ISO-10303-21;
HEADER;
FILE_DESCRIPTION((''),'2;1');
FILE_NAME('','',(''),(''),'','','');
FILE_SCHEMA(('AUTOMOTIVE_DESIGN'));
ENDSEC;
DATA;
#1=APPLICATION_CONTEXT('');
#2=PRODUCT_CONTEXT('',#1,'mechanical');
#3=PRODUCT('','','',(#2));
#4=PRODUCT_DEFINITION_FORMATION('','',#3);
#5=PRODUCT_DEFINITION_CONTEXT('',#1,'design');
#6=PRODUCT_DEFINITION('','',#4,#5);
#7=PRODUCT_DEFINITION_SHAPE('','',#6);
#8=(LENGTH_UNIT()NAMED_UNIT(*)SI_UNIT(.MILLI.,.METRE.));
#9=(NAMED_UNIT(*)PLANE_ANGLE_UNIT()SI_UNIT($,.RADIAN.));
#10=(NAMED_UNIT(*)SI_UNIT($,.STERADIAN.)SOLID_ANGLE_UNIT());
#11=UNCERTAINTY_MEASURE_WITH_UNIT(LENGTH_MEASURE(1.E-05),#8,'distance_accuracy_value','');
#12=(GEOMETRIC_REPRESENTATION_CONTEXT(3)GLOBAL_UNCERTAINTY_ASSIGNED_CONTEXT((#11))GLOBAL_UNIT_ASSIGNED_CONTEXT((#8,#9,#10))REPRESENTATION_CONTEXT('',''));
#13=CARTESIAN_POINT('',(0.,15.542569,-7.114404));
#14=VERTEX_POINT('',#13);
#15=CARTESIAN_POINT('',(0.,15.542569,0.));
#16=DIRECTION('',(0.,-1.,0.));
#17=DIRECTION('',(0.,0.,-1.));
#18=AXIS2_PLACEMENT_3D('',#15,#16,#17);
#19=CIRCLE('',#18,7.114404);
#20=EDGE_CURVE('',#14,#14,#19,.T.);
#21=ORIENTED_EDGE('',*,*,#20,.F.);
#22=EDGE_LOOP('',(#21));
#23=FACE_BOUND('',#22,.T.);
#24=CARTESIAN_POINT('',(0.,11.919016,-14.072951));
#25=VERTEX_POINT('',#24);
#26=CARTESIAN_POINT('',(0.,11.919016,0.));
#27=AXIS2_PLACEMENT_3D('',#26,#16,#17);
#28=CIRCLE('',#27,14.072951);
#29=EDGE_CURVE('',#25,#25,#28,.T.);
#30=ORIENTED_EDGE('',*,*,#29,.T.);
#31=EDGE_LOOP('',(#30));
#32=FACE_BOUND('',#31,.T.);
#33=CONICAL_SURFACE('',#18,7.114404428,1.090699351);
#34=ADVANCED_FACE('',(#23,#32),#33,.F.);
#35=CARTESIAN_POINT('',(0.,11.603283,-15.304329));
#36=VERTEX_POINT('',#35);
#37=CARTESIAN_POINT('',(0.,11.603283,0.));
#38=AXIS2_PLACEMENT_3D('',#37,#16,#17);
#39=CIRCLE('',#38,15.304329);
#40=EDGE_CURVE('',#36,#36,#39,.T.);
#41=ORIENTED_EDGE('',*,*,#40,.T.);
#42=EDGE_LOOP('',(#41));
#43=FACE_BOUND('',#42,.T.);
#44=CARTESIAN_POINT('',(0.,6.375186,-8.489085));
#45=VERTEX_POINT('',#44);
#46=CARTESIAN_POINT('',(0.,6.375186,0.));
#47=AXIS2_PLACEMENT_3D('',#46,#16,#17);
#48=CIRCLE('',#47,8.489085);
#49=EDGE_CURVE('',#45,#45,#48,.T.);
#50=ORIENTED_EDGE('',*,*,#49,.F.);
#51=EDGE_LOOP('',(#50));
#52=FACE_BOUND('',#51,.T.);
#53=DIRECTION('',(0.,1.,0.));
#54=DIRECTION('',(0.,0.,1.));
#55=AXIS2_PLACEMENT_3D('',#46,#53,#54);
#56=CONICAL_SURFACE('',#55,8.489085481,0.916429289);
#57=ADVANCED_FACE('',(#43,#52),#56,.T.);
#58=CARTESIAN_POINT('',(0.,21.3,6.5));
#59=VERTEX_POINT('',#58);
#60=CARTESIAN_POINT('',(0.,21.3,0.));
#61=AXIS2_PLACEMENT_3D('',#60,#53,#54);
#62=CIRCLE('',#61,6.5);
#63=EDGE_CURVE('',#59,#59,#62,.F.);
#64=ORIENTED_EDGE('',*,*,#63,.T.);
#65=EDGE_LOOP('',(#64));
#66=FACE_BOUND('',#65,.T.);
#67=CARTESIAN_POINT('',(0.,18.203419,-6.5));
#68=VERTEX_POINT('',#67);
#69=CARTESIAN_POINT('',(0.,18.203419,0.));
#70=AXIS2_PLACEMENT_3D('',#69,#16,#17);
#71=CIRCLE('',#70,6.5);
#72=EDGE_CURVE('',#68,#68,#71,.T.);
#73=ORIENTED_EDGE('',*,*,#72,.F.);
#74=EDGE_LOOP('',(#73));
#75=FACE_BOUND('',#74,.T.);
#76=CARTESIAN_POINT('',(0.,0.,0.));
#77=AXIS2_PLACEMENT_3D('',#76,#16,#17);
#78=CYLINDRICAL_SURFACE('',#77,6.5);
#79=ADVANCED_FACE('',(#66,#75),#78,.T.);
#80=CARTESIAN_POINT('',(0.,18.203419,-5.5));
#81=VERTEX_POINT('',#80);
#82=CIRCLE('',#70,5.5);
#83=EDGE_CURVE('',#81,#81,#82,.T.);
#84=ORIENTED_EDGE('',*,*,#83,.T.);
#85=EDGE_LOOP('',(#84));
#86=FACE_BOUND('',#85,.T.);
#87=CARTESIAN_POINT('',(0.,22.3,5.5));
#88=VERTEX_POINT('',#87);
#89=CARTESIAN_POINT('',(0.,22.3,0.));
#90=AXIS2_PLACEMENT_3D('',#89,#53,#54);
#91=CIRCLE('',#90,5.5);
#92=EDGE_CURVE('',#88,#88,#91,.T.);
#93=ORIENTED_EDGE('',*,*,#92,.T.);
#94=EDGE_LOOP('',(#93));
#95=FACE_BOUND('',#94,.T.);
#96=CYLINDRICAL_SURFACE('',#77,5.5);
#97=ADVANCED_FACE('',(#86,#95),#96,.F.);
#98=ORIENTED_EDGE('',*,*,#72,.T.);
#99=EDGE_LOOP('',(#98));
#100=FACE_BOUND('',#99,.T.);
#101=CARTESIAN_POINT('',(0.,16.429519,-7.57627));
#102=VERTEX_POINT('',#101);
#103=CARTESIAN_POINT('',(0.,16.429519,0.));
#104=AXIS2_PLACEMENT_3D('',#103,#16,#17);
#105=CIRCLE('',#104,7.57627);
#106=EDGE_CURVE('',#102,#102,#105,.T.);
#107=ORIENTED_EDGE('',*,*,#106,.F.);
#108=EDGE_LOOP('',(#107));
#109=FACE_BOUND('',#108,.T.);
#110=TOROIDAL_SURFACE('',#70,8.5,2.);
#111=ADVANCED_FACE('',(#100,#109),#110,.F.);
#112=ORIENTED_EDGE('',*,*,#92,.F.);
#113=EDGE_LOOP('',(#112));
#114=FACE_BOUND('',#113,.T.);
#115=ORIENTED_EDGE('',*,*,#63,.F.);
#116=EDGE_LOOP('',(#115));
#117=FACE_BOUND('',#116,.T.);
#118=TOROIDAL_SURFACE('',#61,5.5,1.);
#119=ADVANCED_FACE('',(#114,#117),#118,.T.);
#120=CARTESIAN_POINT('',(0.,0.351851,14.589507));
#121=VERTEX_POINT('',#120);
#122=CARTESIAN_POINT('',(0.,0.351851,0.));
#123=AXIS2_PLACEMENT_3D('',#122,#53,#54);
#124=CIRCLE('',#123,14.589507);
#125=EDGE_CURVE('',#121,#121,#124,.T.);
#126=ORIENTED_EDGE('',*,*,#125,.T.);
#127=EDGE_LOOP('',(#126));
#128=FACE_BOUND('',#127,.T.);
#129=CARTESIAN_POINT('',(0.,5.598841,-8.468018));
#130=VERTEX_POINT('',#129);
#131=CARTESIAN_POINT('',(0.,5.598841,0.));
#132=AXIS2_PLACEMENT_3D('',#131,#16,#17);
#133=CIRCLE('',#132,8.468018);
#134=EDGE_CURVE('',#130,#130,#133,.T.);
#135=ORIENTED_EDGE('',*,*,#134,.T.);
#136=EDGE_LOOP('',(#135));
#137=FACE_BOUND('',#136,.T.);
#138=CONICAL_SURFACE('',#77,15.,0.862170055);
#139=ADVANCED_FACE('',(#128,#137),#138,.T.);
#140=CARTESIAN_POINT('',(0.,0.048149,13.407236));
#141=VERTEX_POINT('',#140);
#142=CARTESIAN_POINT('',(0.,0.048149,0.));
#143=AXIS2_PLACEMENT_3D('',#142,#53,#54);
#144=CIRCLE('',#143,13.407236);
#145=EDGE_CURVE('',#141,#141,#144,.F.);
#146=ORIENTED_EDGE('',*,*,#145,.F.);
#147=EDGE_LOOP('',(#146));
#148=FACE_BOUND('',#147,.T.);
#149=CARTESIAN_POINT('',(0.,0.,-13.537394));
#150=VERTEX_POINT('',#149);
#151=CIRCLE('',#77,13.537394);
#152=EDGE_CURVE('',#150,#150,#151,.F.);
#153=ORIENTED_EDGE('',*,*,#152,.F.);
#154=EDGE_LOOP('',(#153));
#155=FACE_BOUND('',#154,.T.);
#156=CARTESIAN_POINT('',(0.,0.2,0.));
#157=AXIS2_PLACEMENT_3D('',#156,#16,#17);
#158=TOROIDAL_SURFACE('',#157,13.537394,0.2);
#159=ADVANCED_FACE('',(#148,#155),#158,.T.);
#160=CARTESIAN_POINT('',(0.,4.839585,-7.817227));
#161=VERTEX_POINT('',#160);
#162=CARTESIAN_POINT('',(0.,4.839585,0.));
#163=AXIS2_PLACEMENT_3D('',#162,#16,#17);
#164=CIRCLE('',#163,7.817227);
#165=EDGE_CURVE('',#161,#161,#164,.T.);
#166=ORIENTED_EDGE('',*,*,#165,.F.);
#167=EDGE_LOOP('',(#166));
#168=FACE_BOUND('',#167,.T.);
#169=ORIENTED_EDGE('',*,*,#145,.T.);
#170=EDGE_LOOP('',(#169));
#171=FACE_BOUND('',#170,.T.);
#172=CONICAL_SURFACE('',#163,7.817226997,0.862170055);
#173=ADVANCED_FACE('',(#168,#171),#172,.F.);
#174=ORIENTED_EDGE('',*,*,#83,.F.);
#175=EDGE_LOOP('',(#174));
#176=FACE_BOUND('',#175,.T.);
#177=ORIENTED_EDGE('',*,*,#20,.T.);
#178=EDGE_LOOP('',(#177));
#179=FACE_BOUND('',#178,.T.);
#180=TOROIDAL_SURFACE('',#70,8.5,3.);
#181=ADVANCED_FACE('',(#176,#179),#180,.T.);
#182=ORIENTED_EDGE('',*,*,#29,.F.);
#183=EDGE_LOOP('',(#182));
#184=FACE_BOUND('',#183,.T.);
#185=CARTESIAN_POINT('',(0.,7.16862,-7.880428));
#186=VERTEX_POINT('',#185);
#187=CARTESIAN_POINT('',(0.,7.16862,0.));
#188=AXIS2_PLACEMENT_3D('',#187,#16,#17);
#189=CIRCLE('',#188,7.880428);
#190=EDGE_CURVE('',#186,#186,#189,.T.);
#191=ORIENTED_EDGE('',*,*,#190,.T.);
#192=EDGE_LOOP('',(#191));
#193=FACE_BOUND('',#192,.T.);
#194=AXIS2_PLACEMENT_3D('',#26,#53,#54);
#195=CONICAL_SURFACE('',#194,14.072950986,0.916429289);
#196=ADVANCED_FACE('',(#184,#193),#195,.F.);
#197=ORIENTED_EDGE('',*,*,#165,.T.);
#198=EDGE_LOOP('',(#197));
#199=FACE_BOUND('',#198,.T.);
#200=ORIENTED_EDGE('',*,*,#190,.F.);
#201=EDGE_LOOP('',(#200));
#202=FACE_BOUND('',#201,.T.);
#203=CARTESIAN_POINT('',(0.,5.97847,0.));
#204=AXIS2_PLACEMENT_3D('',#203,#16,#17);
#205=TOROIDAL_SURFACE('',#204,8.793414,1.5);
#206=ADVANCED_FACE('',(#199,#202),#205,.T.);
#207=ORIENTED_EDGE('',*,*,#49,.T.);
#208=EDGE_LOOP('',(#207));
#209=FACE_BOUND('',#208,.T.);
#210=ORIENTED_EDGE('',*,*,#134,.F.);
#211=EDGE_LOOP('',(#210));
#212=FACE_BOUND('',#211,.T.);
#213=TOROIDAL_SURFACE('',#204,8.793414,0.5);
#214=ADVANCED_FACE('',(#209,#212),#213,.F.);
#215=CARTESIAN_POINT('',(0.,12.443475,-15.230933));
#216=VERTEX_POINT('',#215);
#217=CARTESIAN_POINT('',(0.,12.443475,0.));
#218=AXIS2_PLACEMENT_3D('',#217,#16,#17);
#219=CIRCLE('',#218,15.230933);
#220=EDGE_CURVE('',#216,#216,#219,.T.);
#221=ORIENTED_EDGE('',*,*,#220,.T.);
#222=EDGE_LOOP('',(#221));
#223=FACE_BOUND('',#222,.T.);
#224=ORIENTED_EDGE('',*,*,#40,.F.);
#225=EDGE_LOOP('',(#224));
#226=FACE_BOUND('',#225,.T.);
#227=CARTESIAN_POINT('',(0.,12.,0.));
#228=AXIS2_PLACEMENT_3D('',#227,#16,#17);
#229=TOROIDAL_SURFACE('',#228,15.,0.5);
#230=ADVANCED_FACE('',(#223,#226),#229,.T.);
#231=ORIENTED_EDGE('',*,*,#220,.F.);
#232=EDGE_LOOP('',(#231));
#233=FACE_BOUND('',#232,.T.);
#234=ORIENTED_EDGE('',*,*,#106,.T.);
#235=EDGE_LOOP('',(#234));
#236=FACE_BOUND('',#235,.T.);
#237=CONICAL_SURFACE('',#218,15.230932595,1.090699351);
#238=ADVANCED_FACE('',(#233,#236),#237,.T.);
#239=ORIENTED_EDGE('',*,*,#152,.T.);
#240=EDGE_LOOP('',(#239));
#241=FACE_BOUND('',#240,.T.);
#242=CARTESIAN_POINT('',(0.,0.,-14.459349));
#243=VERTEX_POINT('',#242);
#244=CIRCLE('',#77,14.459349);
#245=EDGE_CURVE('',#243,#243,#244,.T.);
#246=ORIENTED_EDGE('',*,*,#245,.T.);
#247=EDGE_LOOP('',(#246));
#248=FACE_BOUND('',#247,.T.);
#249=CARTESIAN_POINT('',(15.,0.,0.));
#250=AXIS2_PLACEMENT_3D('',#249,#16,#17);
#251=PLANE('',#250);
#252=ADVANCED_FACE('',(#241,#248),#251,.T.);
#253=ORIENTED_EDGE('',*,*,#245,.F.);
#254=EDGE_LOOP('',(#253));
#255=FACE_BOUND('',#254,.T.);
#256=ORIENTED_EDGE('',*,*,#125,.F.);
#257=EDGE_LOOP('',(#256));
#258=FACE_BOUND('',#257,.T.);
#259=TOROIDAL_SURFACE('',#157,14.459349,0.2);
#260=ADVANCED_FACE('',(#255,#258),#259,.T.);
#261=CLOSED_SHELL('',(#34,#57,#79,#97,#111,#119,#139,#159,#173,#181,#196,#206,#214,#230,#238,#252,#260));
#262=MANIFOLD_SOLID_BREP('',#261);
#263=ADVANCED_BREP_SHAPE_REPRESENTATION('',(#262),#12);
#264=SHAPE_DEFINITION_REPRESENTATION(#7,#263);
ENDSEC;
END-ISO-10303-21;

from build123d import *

# Parameters (mm, degrees)
FILLET1_R               = 1
FILLET2_R               = 0.2
BOSS_EXTRUDE1_DEPTH     = 5
FILLET3_R               = 0.5
SKETCH3_R               = 4.35
BOSS_EXTRUDE2_DEPTH     = 6.2
CUT_EXTRUDE1_DEPTH      = 41.03436032
CUT_EXTRUDE1_DEPTH_BACK = 41.03436032
SKETCH4_R               = 1.5
THREAD1_PITCH           = 0.8
BOSS_EXTRUDE3_START     = 1.5
SKETCH6_R               = 5.1
SKETCH6_R_2             = 1.5
BOSS_EXTRUDE3_DEPTH     = 1.5
SKETCH7_R               = 7.576269619
CUT_EXTRUDE2_DEPTH      = 11.2
SKETCH8_R               = 5.5
CUT_EXTRUDE3_DEPTH      = 32.269633931


with BuildPart() as part:
    # Sketch1 → Revolve1 (revolve)
    with BuildSketch(Plane.XY, mode=Mode.PRIVATE) as revolve1_sk:
        with BuildLine():
            Line((13.463409257, 0), (7.817226997, 4.839584794))
            ThreePointArc((7.817226997, 4.839584794), (7.293966035, 6.019159132), (7.880428329, 7.168619714))
            Line((7.880428329, 7.168619714), (14.072950986, 11.919016496))
            Line((14.072950986, 11.919016496), (7.114404428, 15.542569047))
            ThreePointArc((7.114404428, 15.542569047), (5.935162119, 16.647268231), (5.5, 18.203419458))
            Line((5.5, 18.203419458), (5.5, 21.3))
            Line((5.5, 21.3), (0, 21.3))
            Line((0, 21.3), (0, 22.3))
            Line((0, 22.3), (6.5, 22.3))
            Line((6.5, 22.3), (6.5, 18.203419458))
            ThreePointArc((6.5, 18.203419458), (6.790108079, 17.165985306), (7.576269619, 16.429519184))
            Line((7.576269619, 16.429519184), (15.230932595, 12.443475069))
            ThreePointArc((15.230932595, 12.443475069), (15.498103072, 12.043512405), (15.304328576, 11.603283328))
            Line((15.304328576, 11.603283328), (8.489085481, 6.37518637))
            ThreePointArc((8.489085481, 6.37518637), (8.29359805, 5.992032843), (8.46801837, 5.598841397))
            Line((8.46801837, 5.598841397), (15, 0))
            Line((15, 0), (13.463409257, 0))
        make_face()
    revolve(revolve1_sk.sketch.rotate(Axis((0, 0, 0), (0, 1, 0)), 90), axis=Axis((0, 0, 0), (0, 1, 0)))

    # Fillet1
    fillet1_edges = [part.edges().sort_by_distance(p)[0] for p in [
        (0, 22.3, 6.5),
    ]]
    fillet(fillet1_edges, radius=FILLET1_R)

    # Fillet2
    fillet2_edges = [part.edges().sort_by_distance(p)[0] for p in [
        (0, 0, 13.463409257),
        (0, 0, 15),
    ]]
    fillet(fillet2_edges, radius=FILLET2_R)

    # Sketch2 → Boss-Extrude1 (add)
    with BuildSketch(Plane(origin=(0, 22.3, 0), x_dir=(1, 0, 0), z_dir=(0, 1, 0))):
        Polygon((6.5, 0), (3.25, 5.629165125), (-3.25, 5.629165125), (-6.5, 0), (-3.25, -5.629165125), (3.25, -5.629165125), align=None)
    extrude(amount=BOSS_EXTRUDE1_DEPTH)

    # Fillet3
    fillet3_edges = [part.edges().sort_by_distance(p)[0] for p in [
        (4.875, 22.3, 2.814582562),
        (3.25, 24.8, 5.629165125),
        (4.875, 22.3, -2.814582562),
        (6.5, 24.8, 0),
        (0, 22.3, -5.629165125),
        (3.25, 24.8, -5.629165125),
        (-4.875, 22.3, -2.814582562),
        (-3.25, 24.8, -5.629165125),
        (-4.875, 22.3, 2.814582562),
        (-6.5, 24.8, 0),
        (0, 22.3, 5.629165125),
        (-3.25, 24.8, 5.629165125),
        (4.875, 27.3, 2.814582562),
        (4.875, 27.3, -2.814582562),
        (0, 27.3, -5.629165125),
        (-4.875, 27.3, -2.814582562),
        (-4.875, 27.3, 2.814582562),
        (0, 27.3, 5.629165125),
    ]]
    fillet(fillet3_edges, radius=FILLET3_R)

    # Sketch3 → Boss-Extrude2 (add)
    with BuildSketch(Plane(origin=(0, 27.3, 0), x_dir=(1, 0, 0), z_dir=(0, 1, 0))):
        with Locations(Location((0, 0, 0), (0, 0, 270))):
            Circle(SKETCH3_R)
    extrude(amount=BOSS_EXTRUDE2_DEPTH)

    # Sketch4 → Cut-Extrude1 (cut, two sides: drawn at the far end of the back side and taken through both)
    with BuildSketch(Plane(origin=(0, 33.5, 0), x_dir=(1, 0, 0), z_dir=(0, 1, 0)).offset(-CUT_EXTRUDE1_DEPTH_BACK)):
        with Locations(Location((0, 0, 0), (0, 0, 270))):
            Circle(SKETCH4_R)
    extrude(amount=CUT_EXTRUDE1_DEPTH + CUT_EXTRUDE1_DEPTH_BACK, mode=Mode.SUBTRACT)

    # Thread1: the profile of Thread Profile1 profile screwed along a right-hand helix of 13.75 turns, 8 arcs to a turn; built about Z, then put on its axis
    thread1_z = Axis((0, 0, 0), (0, 0, 1))
    thread1_corners = [(4.3497, 0, -0.000173205), (4.7830127, 0, 0.249999999), (4.7830127, 0, 0.349999999), (4.3497, 0, 0.600173203)]
    with BuildLine(mode=Mode.PRIVATE) as thread1_profile:
        Line(thread1_corners[0], thread1_corners[1])
        Line(thread1_corners[1], thread1_corners[2])
        Line(thread1_corners[2], thread1_corners[3])
        Line(thread1_corners[3], thread1_corners[0])
    thread1_cap = Face(thread1_profile.wire())
    thread1_turn_angles = [0, 22.5, 45, 67.5, 90, 112.5, 135, 157.5, 180, 202.5, 225, 247.5, 270, 292.5, 315, 337.5, 360]
    thread1_turn_weights = [1, 0.9238795325112867, 1, 0.9238795325112867, 1, 0.9238795325112867, 1, 0.9238795325112867, 1, 0.9238795325112867, 1, 0.9238795325112867, 1, 0.9238795325112867, 1, 0.9238795325112867, 1]
    thread1_turn_rails = [Edge.make_bspline([Vector(p[0], p[1], 0).rotate(thread1_z, thread1_turn_angles[k]) / thread1_turn_weights[k] + Vector(0, 0, p[2] + THREAD1_PITCH * thread1_turn_angles[k] / 360) for k in range(17)], [0, 0, 0, 1, 1, 2, 2, 3, 3, 4, 4, 5, 5, 6, 6, 7, 7, 8, 8, 8], 2, thread1_turn_weights) for p in thread1_corners]
    thread1_turn_sides = [Face.make_surface_from_curves(thread1_turn_rails[p[0]], thread1_turn_rails[p[1]]) for p in [(0, 1), (1, 2), (2, 3), (3, 0)]]
    thread1_last_angles = [4680, 4702.5, 4725, 4747.5, 4770, 4792.5, 4815, 4837.5, 4860, 4882.5, 4905, 4927.5, 4950]
    thread1_last_weights = [1, 0.9238795325112867, 1, 0.9238795325112867, 1, 0.9238795325112867, 1, 0.9238795325112867, 1, 0.9238795325112867, 1, 0.9238795325112867, 1]
    thread1_last_rails = [Edge.make_bspline([Vector(p[0], p[1], 0).rotate(thread1_z, thread1_last_angles[k]) / thread1_last_weights[k] + Vector(0, 0, p[2] + THREAD1_PITCH * thread1_last_angles[k] / 360) for k in range(13)], [0, 0, 0, 1, 1, 2, 2, 3, 3, 4, 4, 5, 5, 6, 6, 6], 2, thread1_last_weights) for p in thread1_corners]
    thread1_last_sides = [Face.make_surface_from_curves(thread1_last_rails[p[0]], thread1_last_rails[p[1]]) for p in [(0, 1), (1, 2), (2, 3), (3, 0)]]
    thread1 = Plane(origin=(0, 33.5, 0), x_dir=(-1, 0, 0), z_dir=(0, -1, 0)) * Solid(Shell([*[p.moved(Location((0, 0, THREAD1_PITCH * i))) for i in range(13) for p in thread1_turn_sides], *thread1_last_sides, thread1_cap, thread1_cap.rotate(thread1_z, 4950).moved(Location((0, 0, THREAD1_PITCH * 4950 / 360)))]))
    add(thread1)

    # Sketch6 → Boss-Extrude3 (add)
    with BuildSketch(Plane(origin=(0, 27.3, 0), x_dir=(1, 0, 0), z_dir=(0, 1, 0)).offset(BOSS_EXTRUDE3_START)):
        with Locations(Location((0, 0, 0), (0, 0, 270))):
            Circle(SKETCH6_R)
        with Locations(Location((0, 0, 0), (0, 0, 270))):
            Circle(SKETCH6_R_2, mode=Mode.SUBTRACT)
    extrude(amount=-BOSS_EXTRUDE3_DEPTH)

    # Sketch7 → Cut-Extrude2 (cut)
    with BuildSketch(Plane(origin=(0, 33.5, 0), x_dir=(1, 0, 0), z_dir=(0, 1, 0))):
        Circle(SKETCH7_R)
    extrude(amount=-CUT_EXTRUDE2_DEPTH, mode=Mode.SUBTRACT)


with BuildPart() as cut_extrude2_kept_piece:
    # of the separate pieces the step leaves, the one the design keeps (cut_extrude2_pieces_kept)
    add(part.part.solids().sort_by_distance((-1.985362719, 22.3, -5.129165125))[0])

    # Sketch8 → Cut-Extrude3 (cut, through all)
    with BuildSketch(Plane(origin=(0, 22.3, 0), x_dir=(1, 0, 0), z_dir=(0, 1, 0))):
        with Locations(Location((0, 0, 0), (0, 0, 90))):
            Circle(SKETCH8_R)
    extrude(amount=-CUT_EXTRUDE3_DEPTH, mode=Mode.SUBTRACT)


solid = cut_extrude2_kept_piece.part
